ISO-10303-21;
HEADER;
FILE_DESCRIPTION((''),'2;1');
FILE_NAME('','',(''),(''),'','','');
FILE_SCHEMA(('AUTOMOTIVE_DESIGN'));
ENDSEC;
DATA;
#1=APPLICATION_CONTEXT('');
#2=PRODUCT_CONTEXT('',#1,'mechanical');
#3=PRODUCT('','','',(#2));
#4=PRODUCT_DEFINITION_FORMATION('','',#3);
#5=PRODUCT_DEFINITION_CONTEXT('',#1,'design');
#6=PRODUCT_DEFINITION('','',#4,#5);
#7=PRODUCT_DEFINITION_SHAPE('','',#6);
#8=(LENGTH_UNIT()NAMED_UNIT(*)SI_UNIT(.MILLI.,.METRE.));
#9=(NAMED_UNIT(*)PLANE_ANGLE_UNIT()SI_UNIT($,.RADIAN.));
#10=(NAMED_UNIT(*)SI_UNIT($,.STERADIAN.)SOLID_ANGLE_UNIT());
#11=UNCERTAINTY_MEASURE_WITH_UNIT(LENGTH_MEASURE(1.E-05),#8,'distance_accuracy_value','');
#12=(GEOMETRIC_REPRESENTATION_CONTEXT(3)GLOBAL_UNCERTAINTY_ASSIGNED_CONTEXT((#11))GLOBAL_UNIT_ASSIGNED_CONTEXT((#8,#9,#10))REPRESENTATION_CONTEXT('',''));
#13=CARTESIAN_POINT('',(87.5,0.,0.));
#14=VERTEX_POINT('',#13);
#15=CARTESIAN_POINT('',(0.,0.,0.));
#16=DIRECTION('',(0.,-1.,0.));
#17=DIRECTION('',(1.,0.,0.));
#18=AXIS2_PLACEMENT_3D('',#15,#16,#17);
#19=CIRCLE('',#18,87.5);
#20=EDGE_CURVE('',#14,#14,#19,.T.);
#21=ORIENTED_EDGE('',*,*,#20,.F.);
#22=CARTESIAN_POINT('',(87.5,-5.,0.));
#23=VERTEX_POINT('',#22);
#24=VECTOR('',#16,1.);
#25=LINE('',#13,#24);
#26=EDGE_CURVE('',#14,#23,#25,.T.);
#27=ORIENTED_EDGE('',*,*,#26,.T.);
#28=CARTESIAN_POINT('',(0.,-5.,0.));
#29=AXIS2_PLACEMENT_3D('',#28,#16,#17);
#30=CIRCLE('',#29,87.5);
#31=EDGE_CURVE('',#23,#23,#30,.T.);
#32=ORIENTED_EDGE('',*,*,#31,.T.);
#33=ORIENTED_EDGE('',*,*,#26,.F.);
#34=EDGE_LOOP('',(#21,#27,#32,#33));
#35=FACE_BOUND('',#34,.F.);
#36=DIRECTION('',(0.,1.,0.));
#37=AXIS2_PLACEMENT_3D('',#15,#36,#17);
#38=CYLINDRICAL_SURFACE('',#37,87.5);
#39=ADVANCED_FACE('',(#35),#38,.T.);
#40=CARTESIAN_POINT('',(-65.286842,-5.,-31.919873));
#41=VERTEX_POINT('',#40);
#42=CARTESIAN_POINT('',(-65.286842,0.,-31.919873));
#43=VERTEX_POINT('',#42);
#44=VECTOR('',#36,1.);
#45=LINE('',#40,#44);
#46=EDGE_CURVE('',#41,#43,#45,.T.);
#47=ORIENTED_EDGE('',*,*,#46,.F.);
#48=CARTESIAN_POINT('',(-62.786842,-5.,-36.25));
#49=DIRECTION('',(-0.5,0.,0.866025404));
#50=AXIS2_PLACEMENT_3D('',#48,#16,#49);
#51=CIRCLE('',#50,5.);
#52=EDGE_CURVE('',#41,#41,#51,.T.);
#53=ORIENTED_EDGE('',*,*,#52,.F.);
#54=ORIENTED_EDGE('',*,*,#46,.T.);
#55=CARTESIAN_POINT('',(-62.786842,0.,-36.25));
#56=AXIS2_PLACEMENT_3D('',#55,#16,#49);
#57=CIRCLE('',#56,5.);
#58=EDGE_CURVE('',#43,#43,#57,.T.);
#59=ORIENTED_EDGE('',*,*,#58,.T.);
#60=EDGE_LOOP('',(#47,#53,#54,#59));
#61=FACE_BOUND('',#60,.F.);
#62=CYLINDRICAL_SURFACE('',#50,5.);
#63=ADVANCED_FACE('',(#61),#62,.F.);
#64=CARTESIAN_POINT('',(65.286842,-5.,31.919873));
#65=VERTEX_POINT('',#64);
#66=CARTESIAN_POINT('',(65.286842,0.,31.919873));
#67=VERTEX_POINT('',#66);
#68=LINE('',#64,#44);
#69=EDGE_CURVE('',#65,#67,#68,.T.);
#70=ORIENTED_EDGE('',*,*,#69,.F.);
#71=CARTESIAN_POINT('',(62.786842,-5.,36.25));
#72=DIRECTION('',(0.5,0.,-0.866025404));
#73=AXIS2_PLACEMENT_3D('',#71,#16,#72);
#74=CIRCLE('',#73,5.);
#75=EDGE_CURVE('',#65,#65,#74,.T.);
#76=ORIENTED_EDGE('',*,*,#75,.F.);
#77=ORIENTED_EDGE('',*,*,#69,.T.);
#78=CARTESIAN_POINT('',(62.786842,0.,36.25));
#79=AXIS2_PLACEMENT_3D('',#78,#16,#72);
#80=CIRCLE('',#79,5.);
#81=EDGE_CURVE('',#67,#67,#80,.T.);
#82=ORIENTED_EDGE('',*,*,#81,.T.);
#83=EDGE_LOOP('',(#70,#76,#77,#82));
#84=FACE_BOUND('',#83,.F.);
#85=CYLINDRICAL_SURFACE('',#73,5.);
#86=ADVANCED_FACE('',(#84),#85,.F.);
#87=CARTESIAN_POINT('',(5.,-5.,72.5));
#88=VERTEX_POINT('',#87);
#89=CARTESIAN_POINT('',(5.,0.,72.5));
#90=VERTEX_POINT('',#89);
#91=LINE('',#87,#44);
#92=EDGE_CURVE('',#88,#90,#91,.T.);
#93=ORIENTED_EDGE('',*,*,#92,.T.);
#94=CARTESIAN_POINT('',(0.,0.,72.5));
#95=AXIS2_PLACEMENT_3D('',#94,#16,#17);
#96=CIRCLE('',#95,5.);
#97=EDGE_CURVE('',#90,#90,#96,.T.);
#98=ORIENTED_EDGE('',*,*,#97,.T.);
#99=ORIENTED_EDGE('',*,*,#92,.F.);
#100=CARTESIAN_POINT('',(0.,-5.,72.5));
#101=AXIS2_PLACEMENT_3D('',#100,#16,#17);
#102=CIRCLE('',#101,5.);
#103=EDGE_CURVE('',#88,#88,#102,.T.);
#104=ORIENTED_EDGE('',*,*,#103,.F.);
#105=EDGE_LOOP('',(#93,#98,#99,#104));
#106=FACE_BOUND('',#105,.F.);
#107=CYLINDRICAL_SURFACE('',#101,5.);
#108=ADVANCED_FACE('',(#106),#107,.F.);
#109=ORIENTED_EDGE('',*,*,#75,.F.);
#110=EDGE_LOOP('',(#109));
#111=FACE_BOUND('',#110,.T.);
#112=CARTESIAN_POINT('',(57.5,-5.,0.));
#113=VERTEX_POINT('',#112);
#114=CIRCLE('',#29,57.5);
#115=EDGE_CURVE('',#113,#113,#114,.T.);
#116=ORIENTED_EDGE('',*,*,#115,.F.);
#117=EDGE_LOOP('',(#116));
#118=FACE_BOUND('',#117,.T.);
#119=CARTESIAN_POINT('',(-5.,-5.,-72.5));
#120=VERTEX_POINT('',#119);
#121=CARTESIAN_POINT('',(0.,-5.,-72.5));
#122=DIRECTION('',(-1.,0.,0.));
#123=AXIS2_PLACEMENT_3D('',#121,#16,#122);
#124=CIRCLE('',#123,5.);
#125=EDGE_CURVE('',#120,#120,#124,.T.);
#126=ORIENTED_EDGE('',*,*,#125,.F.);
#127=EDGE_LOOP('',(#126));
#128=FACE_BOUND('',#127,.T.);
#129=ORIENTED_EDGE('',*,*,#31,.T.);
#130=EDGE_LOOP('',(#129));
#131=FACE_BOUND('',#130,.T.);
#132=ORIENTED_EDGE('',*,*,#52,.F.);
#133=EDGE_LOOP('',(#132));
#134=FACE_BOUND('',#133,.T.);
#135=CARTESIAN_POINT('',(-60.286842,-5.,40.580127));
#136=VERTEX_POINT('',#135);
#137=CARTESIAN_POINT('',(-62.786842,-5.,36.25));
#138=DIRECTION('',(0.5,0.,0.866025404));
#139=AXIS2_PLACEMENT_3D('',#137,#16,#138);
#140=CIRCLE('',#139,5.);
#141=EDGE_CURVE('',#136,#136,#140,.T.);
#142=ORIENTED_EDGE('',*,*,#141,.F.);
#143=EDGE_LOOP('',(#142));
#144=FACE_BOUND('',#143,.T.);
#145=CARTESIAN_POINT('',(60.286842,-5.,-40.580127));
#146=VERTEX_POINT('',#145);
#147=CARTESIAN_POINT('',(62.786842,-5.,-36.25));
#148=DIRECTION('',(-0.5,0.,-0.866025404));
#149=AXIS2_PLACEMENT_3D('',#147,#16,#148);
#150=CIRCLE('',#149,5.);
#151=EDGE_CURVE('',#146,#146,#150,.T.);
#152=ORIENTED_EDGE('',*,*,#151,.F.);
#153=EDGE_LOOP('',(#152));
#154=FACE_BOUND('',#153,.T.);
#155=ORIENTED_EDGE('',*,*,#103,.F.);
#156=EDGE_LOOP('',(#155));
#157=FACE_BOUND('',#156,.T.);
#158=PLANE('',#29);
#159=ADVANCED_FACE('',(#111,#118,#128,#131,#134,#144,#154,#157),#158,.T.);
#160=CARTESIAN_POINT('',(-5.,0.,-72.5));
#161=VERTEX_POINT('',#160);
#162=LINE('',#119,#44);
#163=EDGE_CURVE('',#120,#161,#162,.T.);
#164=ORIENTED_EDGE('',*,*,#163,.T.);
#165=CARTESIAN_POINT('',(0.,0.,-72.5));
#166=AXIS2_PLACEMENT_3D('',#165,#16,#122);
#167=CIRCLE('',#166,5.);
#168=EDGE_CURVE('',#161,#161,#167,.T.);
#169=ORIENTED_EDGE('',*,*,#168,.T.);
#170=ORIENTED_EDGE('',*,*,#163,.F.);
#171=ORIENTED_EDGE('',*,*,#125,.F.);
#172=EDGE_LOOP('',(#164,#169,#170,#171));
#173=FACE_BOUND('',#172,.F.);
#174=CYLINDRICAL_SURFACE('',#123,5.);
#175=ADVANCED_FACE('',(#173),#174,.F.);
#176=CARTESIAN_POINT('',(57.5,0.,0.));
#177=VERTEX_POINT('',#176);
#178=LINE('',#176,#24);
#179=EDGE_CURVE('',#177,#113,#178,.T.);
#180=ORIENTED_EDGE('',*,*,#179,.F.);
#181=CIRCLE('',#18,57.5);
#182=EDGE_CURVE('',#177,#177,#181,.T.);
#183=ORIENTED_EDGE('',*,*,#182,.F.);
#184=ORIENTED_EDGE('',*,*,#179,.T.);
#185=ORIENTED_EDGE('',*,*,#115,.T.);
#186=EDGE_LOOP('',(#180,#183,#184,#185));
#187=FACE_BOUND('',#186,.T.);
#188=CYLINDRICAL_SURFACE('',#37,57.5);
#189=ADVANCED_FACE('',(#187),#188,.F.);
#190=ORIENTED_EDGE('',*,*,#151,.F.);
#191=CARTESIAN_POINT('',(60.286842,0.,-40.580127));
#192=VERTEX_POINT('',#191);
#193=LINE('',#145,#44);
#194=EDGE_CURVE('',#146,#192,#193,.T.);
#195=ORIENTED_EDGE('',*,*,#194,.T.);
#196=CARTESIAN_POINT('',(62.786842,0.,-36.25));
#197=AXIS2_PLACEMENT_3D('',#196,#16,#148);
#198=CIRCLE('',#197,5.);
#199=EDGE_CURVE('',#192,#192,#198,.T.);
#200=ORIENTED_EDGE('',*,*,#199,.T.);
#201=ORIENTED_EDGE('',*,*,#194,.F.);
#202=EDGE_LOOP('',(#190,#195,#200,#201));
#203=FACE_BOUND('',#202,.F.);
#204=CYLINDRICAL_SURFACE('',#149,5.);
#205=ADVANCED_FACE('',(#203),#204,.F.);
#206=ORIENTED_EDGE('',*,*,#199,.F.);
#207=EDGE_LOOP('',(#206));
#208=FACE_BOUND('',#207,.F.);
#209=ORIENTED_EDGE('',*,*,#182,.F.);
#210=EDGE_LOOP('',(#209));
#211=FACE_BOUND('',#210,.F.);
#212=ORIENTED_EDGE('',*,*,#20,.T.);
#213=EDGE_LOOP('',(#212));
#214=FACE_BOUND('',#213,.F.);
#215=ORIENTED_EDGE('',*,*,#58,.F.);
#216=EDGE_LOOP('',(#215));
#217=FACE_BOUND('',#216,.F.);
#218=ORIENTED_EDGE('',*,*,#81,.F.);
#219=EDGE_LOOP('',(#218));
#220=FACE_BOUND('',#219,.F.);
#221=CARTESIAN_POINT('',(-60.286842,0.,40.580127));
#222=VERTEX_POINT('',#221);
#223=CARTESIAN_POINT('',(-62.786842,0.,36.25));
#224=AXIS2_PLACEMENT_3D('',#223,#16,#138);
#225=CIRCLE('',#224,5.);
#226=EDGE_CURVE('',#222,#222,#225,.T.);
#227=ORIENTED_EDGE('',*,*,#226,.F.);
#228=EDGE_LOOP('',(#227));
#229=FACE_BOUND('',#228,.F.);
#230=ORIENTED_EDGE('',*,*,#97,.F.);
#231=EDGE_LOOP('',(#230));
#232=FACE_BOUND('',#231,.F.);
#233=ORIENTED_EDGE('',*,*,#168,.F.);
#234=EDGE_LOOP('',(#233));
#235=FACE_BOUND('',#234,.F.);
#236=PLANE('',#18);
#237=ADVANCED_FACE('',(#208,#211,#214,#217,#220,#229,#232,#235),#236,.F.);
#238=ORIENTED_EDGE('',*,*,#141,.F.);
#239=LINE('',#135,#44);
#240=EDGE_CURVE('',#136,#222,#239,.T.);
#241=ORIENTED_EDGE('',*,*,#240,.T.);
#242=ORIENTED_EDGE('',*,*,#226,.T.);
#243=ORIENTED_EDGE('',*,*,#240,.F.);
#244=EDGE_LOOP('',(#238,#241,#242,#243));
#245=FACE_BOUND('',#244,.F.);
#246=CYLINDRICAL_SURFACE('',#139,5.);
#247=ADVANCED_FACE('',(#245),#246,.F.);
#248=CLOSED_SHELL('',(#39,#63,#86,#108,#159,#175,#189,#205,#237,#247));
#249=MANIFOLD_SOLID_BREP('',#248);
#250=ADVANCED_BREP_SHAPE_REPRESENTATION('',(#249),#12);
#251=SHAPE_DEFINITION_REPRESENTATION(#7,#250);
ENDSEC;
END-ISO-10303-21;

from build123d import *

# Parameters (mm, degrees)
F0_R            = 87.5
F0_R_2          = 57.5
F1_DEPTH        = 5
F2_R            = 5
F3_DEPTH        = 5.001
F3_COPIES_COUNT = 6


# Not quite as in the source:
# - a pattern or mirror of a feature is missing from the dataset's text; its kind, count and spacing are read off the source's solid


with BuildPart() as f1:
    # F0 (on Front) → F1 (new body)
    with BuildSketch(Plane.XZ):
        Circle(F0_R)
        Circle(F0_R_2, mode=Mode.SUBTRACT)
    extrude(amount=F1_DEPTH)

    # F2 (on face) → F3 (cut, through all)
    with BuildSketch(Plane.XZ.offset(5)):
        with Locations((0, 72.5)):
            Circle(F2_R)
    f3 = extrude(amount=-F3_DEPTH, mode=Mode.SUBTRACT)

    # F3_copies: F3 ×6 about axis
    f3_copies_axis = Axis((0, 0, 0), (0, 1, 0))
    for i in range(1, F3_COPIES_COUNT):
        add(f3.rotate(f3_copies_axis, i * 360 / F3_COPIES_COUNT), mode=Mode.SUBTRACT)


solid = f1.part
